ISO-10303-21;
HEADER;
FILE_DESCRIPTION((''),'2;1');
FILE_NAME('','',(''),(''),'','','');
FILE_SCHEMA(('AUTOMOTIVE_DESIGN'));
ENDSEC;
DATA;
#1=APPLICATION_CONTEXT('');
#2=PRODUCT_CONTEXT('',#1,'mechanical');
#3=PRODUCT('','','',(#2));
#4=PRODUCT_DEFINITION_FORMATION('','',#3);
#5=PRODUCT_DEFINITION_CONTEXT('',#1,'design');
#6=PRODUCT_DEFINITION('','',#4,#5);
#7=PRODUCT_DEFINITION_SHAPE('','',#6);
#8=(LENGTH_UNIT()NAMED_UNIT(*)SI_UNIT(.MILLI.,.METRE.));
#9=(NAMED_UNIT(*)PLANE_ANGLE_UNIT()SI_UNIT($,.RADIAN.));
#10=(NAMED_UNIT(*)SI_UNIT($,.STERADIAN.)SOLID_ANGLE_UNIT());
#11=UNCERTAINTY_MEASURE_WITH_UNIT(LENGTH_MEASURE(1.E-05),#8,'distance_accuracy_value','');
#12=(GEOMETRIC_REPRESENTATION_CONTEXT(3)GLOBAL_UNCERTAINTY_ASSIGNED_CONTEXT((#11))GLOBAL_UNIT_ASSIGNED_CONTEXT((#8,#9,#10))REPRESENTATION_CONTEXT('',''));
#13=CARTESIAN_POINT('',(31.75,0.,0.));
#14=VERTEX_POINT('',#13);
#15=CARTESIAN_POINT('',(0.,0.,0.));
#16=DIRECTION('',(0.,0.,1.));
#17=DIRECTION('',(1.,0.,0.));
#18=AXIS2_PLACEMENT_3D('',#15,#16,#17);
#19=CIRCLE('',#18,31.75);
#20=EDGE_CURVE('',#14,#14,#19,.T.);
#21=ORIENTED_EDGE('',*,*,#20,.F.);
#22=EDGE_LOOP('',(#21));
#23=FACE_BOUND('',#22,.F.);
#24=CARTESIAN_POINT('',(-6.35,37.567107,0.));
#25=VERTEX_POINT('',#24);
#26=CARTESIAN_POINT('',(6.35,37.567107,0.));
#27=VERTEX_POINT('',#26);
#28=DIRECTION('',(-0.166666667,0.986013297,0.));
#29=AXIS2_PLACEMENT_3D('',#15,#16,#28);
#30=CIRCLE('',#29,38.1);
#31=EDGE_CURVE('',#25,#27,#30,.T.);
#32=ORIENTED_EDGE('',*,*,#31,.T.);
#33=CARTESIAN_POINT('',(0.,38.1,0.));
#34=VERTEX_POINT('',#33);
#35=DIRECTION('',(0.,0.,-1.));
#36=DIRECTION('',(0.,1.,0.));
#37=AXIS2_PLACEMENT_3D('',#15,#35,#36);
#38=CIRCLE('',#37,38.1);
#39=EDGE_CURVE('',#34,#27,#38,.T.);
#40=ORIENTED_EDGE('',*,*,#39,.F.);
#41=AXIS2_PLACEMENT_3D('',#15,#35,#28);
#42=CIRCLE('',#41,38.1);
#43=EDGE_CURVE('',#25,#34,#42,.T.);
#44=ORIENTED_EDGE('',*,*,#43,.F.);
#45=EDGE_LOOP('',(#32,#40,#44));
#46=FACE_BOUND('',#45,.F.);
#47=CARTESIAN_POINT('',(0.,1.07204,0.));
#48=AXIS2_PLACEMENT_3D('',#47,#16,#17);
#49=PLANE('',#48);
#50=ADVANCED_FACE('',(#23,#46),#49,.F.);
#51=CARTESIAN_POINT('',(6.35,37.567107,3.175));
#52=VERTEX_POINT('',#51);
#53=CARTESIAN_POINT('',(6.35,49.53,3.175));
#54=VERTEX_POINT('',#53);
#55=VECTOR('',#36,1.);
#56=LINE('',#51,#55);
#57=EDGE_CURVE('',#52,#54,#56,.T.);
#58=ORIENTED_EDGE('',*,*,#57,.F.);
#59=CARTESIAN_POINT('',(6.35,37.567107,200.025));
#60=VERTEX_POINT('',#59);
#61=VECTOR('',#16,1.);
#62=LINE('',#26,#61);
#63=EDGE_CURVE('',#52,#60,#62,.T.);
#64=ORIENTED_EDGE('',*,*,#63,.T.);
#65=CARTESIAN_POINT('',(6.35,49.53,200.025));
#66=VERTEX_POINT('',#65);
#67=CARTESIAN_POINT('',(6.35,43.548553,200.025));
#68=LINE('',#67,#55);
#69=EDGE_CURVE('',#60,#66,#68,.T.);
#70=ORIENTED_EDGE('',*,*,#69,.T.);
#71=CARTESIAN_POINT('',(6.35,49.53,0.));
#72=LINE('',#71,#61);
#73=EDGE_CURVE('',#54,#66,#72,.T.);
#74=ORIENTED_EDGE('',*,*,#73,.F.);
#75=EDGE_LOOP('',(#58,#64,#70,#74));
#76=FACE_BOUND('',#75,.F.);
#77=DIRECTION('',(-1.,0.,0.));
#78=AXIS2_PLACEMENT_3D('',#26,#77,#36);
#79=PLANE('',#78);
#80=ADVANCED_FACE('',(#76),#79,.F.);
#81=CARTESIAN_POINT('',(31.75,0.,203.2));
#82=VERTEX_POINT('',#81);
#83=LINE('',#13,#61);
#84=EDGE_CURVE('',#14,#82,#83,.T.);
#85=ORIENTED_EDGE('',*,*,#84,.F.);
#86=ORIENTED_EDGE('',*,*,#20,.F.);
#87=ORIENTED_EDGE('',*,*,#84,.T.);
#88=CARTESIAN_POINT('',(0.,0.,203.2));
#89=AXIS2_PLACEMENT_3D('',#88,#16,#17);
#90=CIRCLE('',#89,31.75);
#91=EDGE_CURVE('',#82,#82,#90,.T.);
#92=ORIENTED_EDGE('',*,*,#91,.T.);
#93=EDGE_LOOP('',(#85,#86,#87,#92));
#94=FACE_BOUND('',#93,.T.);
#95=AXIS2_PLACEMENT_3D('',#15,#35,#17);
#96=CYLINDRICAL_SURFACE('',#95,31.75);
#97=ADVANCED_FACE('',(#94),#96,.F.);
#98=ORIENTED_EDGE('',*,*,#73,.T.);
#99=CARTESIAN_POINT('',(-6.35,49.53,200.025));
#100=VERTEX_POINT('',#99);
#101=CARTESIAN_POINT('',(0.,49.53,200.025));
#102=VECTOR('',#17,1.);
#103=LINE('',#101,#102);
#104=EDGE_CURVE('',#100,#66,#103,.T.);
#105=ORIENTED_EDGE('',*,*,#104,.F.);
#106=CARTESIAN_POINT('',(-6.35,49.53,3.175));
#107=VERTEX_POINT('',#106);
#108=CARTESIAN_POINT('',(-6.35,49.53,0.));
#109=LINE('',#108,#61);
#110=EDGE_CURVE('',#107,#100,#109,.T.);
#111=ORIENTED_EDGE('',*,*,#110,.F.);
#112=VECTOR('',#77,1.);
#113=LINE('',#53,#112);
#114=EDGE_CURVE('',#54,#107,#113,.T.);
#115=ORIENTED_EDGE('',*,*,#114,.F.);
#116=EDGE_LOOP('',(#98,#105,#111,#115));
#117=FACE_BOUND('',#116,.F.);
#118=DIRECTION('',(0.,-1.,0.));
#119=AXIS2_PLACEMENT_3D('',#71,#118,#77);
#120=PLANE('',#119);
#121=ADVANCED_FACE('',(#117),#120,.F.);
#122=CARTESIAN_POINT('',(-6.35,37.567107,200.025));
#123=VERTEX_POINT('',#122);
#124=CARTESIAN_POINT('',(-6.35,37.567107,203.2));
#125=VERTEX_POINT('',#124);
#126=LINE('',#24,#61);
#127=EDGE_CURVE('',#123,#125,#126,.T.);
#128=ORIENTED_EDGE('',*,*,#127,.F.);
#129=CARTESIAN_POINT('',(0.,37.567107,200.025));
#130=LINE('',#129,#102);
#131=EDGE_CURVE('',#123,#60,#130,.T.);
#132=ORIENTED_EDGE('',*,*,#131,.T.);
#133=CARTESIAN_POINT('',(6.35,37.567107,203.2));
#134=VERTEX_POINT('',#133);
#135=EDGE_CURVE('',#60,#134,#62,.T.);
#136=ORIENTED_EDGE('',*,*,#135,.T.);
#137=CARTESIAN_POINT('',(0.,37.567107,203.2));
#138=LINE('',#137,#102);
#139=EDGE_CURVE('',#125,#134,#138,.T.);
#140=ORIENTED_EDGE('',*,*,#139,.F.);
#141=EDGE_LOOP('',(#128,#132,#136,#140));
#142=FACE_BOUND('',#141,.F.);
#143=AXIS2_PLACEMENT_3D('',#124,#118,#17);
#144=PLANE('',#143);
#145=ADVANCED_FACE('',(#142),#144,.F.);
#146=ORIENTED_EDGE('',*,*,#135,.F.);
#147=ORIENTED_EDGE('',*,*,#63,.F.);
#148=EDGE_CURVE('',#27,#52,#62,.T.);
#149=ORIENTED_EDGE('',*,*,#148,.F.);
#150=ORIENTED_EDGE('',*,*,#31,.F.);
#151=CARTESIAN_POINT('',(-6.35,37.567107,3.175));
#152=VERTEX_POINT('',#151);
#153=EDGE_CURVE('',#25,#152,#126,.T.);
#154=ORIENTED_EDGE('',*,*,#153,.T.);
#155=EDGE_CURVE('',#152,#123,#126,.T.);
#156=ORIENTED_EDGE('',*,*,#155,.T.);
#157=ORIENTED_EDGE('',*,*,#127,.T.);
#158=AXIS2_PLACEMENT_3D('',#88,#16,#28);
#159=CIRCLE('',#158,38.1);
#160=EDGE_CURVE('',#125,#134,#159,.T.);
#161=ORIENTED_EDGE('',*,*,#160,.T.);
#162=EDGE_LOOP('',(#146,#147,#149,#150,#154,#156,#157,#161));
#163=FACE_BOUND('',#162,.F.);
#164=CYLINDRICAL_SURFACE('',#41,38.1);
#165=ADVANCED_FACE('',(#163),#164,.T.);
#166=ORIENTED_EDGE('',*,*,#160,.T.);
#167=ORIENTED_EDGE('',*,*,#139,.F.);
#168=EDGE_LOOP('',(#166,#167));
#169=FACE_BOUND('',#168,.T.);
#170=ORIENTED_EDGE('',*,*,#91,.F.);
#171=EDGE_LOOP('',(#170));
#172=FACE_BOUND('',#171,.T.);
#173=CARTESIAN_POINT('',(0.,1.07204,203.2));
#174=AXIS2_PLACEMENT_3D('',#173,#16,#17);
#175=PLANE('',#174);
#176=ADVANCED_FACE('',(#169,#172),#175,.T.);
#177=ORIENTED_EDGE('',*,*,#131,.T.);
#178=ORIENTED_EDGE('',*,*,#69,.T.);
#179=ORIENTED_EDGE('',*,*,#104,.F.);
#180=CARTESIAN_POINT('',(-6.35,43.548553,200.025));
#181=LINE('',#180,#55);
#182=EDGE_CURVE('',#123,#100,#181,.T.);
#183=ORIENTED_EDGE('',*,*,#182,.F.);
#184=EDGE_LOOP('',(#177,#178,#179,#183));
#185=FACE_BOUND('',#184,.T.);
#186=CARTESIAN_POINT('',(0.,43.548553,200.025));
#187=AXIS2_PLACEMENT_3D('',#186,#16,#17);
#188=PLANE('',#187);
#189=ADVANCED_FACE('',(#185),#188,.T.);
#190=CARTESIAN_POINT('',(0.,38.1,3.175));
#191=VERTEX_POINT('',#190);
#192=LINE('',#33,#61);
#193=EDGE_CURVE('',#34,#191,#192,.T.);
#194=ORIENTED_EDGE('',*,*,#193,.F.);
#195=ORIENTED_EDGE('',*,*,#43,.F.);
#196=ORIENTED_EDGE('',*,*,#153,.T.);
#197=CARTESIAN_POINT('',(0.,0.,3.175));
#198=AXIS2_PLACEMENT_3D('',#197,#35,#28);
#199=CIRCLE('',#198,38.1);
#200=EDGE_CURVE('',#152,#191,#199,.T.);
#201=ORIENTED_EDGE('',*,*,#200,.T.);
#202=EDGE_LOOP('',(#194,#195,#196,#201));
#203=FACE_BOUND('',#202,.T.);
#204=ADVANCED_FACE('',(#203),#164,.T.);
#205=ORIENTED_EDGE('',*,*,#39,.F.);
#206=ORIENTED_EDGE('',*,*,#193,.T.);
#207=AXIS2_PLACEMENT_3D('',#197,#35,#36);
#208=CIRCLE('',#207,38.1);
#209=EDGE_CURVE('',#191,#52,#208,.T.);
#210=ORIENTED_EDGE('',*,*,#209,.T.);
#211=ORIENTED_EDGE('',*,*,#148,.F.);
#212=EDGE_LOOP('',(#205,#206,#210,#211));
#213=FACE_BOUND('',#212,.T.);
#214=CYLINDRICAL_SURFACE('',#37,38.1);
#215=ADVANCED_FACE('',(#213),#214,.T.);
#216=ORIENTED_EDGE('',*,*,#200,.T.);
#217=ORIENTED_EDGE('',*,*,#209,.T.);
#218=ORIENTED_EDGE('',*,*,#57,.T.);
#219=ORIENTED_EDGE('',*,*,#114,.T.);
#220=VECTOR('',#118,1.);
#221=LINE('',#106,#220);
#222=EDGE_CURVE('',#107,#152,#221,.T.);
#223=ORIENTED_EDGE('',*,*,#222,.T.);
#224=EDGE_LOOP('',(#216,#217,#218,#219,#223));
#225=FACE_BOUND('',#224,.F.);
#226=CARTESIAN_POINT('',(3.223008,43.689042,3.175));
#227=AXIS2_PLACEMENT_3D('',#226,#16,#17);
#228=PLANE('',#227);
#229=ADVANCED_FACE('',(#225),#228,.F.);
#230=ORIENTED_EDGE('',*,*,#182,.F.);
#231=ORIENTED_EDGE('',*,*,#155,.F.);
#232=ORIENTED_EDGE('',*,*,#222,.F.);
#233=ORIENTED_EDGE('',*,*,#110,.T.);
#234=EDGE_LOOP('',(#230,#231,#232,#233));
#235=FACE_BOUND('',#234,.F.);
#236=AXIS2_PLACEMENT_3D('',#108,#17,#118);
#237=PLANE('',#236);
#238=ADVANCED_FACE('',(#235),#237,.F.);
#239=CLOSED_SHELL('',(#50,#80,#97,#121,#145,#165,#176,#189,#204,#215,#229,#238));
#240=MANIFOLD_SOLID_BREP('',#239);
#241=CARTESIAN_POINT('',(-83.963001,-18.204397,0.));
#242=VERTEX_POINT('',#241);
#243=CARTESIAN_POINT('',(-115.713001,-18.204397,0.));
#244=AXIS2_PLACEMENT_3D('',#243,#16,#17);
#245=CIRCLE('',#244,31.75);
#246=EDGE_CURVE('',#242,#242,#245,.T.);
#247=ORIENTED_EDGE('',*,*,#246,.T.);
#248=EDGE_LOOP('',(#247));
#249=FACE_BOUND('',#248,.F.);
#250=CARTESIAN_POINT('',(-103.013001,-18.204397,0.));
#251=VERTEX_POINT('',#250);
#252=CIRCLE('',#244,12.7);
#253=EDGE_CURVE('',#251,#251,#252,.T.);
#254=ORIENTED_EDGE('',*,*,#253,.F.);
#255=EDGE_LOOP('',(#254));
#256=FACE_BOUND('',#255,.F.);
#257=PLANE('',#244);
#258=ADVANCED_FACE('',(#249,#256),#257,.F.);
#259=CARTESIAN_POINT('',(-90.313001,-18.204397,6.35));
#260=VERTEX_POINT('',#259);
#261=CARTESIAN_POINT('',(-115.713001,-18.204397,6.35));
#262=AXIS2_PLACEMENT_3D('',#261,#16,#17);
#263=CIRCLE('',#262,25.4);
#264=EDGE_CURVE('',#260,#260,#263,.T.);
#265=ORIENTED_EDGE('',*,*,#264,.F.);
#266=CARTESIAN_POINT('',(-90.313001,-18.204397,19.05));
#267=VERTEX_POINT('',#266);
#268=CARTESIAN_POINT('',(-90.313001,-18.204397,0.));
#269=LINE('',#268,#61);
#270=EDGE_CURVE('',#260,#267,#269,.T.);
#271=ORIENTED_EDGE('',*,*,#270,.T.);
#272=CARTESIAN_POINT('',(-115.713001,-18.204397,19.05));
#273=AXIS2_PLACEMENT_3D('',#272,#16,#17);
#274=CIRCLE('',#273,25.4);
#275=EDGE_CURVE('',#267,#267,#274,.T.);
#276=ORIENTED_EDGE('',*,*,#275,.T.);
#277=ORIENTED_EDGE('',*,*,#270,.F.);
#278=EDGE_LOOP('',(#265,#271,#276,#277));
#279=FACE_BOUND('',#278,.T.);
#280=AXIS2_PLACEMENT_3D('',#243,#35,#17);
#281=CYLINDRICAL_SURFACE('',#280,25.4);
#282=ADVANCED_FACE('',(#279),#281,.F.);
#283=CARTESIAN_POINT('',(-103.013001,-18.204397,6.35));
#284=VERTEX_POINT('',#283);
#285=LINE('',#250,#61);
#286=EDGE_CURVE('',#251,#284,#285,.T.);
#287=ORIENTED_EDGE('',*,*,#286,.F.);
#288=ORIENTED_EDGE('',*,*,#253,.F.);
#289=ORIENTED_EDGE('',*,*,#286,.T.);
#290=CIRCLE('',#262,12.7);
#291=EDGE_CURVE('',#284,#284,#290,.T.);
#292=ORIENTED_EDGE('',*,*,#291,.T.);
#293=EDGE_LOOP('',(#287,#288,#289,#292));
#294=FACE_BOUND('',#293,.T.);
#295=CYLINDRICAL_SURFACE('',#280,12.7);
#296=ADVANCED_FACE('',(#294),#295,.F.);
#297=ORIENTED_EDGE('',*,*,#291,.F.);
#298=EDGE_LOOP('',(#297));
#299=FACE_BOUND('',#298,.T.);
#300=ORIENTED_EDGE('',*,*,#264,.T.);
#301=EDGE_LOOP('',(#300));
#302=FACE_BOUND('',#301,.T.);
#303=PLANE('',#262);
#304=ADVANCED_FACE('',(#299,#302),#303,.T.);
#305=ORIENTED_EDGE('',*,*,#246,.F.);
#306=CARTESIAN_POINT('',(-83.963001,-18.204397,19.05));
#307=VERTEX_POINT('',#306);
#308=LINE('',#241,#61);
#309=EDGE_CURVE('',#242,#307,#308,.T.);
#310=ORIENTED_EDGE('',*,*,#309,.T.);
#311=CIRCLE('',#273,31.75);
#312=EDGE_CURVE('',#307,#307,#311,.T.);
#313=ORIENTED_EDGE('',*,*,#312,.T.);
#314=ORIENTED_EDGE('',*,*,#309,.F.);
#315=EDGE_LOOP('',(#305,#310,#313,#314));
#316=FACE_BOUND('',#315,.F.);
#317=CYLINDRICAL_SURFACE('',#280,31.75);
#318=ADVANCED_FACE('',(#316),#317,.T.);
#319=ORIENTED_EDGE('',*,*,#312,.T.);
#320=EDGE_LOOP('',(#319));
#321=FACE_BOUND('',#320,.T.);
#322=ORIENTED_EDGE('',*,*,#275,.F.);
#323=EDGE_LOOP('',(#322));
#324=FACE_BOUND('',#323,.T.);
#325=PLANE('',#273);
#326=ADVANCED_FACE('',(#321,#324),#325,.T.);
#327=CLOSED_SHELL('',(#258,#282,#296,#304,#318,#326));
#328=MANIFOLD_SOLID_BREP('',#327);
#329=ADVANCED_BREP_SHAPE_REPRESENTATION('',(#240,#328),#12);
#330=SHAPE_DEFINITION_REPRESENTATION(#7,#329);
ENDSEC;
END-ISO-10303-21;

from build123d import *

# Parameters (mm, degrees)
F0_R     = 31.75
F0_R_2   = 25.4
F1_DEPTH = 19.05
F0_R_3   = 12.7
F2_DEPTH = 6.35
F3_DEPTH = 203.2
F4_W     = 12.7
F4_H     = 11.9628933773
F5_DEPTH = 3.175
F6_DEPTH = 3.175


# Not quite as in the source:
# - a feature names something its author has since deleted; it is built from what else it names


with BuildPart() as f1:
    # F0 (on Top) → F1 (new body)
    with BuildSketch(Plane.XY):
        with Locations((-115.7130011189, -18.2043969423)):
            Circle(F0_R)
        with Locations((-115.7130011189, -18.2043969423)):
            Circle(F0_R_2, mode=Mode.SUBTRACT)
    extrude(amount=F1_DEPTH)

    # F0 (on Top) → F2 (join)
    with BuildSketch(Plane.XY):
        with Locations((-115.7130011189, -18.2043969423)):
            Circle(F0_R_2)
        with Locations((-115.7130011189, -18.2043969423)):
            Circle(F0_R_3, mode=Mode.SUBTRACT)
    extrude(amount=F2_DEPTH)


with BuildPart() as f3:
    # F0 (on Top) → F3 (new body)
    with BuildSketch(Plane.XY):
        with BuildLine():
            ThreePointArc((-6.35, 37.5671066227), (-24.5934442484, -29.099355663), (38.1, 0))
            ThreePointArc((38.1, 0), (29.099355663, 24.5934442484), (6.35, 37.5671066227))
            ThreePointArc((6.35, 37.5671066227), (3.1861605167, 37.9665429182), (0, 38.1))
            ThreePointArc((0, 38.1), (-3.1861605167, 37.9665429182), (-6.35, 37.5671066227))
        make_face()
        Circle(F0_R, mode=Mode.SUBTRACT)
        with BuildLine():
            ThreePointArc((0, 38.1), (3.1861605167, 37.9665429182), (6.35, 37.5671066227))
            Line((6.35, 37.5671066227), (6.35, 49.53))
            Line((6.35, 49.53), (0, 49.53))
            Line((0, 49.53), (0, 38.1))
        make_face()
        with BuildLine():
            Line((-6.35, 49.53), (-6.35, 37.5671066227))
            ThreePointArc((-6.35, 37.5671066227), (-3.1861605167, 37.9665429182), (0, 38.1))
            Line((0, 38.1), (0, 49.53))
            Line((0, 49.53), (-6.35, 49.53))
        make_face()
    extrude(amount=F3_DEPTH)

    # F4 (on face) → F5 (cut)
    with BuildSketch(Plane.XY.offset(203.2)):
        with Locations((0, 43.5485533113)):
            Rectangle(F4_W, F4_H)
    extrude(amount=-F5_DEPTH, mode=Mode.SUBTRACT)

    # F0 (on Top) → F6 (cut)
    with BuildSketch(Plane.XY):
        with BuildLine():
            ThreePointArc((0, 38.1), (3.1861605167, 37.9665429182), (6.35, 37.5671066227))
            Line((6.35, 37.5671066227), (6.35, 49.53))
            Line((6.35, 49.53), (0, 49.53))
            Line((0, 49.53), (0, 38.1))
        make_face()
        with BuildLine():
            Line((-6.35, 49.53), (-6.35, 37.5671066227))
            ThreePointArc((-6.35, 37.5671066227), (-3.1861605167, 37.9665429182), (0, 38.1))
            Line((0, 38.1), (0, 49.53))
            Line((0, 49.53), (-6.35, 49.53))
        make_face()
    extrude(amount=F6_DEPTH, mode=Mode.SUBTRACT)


solid = Compound([f1.part, f3.part])
